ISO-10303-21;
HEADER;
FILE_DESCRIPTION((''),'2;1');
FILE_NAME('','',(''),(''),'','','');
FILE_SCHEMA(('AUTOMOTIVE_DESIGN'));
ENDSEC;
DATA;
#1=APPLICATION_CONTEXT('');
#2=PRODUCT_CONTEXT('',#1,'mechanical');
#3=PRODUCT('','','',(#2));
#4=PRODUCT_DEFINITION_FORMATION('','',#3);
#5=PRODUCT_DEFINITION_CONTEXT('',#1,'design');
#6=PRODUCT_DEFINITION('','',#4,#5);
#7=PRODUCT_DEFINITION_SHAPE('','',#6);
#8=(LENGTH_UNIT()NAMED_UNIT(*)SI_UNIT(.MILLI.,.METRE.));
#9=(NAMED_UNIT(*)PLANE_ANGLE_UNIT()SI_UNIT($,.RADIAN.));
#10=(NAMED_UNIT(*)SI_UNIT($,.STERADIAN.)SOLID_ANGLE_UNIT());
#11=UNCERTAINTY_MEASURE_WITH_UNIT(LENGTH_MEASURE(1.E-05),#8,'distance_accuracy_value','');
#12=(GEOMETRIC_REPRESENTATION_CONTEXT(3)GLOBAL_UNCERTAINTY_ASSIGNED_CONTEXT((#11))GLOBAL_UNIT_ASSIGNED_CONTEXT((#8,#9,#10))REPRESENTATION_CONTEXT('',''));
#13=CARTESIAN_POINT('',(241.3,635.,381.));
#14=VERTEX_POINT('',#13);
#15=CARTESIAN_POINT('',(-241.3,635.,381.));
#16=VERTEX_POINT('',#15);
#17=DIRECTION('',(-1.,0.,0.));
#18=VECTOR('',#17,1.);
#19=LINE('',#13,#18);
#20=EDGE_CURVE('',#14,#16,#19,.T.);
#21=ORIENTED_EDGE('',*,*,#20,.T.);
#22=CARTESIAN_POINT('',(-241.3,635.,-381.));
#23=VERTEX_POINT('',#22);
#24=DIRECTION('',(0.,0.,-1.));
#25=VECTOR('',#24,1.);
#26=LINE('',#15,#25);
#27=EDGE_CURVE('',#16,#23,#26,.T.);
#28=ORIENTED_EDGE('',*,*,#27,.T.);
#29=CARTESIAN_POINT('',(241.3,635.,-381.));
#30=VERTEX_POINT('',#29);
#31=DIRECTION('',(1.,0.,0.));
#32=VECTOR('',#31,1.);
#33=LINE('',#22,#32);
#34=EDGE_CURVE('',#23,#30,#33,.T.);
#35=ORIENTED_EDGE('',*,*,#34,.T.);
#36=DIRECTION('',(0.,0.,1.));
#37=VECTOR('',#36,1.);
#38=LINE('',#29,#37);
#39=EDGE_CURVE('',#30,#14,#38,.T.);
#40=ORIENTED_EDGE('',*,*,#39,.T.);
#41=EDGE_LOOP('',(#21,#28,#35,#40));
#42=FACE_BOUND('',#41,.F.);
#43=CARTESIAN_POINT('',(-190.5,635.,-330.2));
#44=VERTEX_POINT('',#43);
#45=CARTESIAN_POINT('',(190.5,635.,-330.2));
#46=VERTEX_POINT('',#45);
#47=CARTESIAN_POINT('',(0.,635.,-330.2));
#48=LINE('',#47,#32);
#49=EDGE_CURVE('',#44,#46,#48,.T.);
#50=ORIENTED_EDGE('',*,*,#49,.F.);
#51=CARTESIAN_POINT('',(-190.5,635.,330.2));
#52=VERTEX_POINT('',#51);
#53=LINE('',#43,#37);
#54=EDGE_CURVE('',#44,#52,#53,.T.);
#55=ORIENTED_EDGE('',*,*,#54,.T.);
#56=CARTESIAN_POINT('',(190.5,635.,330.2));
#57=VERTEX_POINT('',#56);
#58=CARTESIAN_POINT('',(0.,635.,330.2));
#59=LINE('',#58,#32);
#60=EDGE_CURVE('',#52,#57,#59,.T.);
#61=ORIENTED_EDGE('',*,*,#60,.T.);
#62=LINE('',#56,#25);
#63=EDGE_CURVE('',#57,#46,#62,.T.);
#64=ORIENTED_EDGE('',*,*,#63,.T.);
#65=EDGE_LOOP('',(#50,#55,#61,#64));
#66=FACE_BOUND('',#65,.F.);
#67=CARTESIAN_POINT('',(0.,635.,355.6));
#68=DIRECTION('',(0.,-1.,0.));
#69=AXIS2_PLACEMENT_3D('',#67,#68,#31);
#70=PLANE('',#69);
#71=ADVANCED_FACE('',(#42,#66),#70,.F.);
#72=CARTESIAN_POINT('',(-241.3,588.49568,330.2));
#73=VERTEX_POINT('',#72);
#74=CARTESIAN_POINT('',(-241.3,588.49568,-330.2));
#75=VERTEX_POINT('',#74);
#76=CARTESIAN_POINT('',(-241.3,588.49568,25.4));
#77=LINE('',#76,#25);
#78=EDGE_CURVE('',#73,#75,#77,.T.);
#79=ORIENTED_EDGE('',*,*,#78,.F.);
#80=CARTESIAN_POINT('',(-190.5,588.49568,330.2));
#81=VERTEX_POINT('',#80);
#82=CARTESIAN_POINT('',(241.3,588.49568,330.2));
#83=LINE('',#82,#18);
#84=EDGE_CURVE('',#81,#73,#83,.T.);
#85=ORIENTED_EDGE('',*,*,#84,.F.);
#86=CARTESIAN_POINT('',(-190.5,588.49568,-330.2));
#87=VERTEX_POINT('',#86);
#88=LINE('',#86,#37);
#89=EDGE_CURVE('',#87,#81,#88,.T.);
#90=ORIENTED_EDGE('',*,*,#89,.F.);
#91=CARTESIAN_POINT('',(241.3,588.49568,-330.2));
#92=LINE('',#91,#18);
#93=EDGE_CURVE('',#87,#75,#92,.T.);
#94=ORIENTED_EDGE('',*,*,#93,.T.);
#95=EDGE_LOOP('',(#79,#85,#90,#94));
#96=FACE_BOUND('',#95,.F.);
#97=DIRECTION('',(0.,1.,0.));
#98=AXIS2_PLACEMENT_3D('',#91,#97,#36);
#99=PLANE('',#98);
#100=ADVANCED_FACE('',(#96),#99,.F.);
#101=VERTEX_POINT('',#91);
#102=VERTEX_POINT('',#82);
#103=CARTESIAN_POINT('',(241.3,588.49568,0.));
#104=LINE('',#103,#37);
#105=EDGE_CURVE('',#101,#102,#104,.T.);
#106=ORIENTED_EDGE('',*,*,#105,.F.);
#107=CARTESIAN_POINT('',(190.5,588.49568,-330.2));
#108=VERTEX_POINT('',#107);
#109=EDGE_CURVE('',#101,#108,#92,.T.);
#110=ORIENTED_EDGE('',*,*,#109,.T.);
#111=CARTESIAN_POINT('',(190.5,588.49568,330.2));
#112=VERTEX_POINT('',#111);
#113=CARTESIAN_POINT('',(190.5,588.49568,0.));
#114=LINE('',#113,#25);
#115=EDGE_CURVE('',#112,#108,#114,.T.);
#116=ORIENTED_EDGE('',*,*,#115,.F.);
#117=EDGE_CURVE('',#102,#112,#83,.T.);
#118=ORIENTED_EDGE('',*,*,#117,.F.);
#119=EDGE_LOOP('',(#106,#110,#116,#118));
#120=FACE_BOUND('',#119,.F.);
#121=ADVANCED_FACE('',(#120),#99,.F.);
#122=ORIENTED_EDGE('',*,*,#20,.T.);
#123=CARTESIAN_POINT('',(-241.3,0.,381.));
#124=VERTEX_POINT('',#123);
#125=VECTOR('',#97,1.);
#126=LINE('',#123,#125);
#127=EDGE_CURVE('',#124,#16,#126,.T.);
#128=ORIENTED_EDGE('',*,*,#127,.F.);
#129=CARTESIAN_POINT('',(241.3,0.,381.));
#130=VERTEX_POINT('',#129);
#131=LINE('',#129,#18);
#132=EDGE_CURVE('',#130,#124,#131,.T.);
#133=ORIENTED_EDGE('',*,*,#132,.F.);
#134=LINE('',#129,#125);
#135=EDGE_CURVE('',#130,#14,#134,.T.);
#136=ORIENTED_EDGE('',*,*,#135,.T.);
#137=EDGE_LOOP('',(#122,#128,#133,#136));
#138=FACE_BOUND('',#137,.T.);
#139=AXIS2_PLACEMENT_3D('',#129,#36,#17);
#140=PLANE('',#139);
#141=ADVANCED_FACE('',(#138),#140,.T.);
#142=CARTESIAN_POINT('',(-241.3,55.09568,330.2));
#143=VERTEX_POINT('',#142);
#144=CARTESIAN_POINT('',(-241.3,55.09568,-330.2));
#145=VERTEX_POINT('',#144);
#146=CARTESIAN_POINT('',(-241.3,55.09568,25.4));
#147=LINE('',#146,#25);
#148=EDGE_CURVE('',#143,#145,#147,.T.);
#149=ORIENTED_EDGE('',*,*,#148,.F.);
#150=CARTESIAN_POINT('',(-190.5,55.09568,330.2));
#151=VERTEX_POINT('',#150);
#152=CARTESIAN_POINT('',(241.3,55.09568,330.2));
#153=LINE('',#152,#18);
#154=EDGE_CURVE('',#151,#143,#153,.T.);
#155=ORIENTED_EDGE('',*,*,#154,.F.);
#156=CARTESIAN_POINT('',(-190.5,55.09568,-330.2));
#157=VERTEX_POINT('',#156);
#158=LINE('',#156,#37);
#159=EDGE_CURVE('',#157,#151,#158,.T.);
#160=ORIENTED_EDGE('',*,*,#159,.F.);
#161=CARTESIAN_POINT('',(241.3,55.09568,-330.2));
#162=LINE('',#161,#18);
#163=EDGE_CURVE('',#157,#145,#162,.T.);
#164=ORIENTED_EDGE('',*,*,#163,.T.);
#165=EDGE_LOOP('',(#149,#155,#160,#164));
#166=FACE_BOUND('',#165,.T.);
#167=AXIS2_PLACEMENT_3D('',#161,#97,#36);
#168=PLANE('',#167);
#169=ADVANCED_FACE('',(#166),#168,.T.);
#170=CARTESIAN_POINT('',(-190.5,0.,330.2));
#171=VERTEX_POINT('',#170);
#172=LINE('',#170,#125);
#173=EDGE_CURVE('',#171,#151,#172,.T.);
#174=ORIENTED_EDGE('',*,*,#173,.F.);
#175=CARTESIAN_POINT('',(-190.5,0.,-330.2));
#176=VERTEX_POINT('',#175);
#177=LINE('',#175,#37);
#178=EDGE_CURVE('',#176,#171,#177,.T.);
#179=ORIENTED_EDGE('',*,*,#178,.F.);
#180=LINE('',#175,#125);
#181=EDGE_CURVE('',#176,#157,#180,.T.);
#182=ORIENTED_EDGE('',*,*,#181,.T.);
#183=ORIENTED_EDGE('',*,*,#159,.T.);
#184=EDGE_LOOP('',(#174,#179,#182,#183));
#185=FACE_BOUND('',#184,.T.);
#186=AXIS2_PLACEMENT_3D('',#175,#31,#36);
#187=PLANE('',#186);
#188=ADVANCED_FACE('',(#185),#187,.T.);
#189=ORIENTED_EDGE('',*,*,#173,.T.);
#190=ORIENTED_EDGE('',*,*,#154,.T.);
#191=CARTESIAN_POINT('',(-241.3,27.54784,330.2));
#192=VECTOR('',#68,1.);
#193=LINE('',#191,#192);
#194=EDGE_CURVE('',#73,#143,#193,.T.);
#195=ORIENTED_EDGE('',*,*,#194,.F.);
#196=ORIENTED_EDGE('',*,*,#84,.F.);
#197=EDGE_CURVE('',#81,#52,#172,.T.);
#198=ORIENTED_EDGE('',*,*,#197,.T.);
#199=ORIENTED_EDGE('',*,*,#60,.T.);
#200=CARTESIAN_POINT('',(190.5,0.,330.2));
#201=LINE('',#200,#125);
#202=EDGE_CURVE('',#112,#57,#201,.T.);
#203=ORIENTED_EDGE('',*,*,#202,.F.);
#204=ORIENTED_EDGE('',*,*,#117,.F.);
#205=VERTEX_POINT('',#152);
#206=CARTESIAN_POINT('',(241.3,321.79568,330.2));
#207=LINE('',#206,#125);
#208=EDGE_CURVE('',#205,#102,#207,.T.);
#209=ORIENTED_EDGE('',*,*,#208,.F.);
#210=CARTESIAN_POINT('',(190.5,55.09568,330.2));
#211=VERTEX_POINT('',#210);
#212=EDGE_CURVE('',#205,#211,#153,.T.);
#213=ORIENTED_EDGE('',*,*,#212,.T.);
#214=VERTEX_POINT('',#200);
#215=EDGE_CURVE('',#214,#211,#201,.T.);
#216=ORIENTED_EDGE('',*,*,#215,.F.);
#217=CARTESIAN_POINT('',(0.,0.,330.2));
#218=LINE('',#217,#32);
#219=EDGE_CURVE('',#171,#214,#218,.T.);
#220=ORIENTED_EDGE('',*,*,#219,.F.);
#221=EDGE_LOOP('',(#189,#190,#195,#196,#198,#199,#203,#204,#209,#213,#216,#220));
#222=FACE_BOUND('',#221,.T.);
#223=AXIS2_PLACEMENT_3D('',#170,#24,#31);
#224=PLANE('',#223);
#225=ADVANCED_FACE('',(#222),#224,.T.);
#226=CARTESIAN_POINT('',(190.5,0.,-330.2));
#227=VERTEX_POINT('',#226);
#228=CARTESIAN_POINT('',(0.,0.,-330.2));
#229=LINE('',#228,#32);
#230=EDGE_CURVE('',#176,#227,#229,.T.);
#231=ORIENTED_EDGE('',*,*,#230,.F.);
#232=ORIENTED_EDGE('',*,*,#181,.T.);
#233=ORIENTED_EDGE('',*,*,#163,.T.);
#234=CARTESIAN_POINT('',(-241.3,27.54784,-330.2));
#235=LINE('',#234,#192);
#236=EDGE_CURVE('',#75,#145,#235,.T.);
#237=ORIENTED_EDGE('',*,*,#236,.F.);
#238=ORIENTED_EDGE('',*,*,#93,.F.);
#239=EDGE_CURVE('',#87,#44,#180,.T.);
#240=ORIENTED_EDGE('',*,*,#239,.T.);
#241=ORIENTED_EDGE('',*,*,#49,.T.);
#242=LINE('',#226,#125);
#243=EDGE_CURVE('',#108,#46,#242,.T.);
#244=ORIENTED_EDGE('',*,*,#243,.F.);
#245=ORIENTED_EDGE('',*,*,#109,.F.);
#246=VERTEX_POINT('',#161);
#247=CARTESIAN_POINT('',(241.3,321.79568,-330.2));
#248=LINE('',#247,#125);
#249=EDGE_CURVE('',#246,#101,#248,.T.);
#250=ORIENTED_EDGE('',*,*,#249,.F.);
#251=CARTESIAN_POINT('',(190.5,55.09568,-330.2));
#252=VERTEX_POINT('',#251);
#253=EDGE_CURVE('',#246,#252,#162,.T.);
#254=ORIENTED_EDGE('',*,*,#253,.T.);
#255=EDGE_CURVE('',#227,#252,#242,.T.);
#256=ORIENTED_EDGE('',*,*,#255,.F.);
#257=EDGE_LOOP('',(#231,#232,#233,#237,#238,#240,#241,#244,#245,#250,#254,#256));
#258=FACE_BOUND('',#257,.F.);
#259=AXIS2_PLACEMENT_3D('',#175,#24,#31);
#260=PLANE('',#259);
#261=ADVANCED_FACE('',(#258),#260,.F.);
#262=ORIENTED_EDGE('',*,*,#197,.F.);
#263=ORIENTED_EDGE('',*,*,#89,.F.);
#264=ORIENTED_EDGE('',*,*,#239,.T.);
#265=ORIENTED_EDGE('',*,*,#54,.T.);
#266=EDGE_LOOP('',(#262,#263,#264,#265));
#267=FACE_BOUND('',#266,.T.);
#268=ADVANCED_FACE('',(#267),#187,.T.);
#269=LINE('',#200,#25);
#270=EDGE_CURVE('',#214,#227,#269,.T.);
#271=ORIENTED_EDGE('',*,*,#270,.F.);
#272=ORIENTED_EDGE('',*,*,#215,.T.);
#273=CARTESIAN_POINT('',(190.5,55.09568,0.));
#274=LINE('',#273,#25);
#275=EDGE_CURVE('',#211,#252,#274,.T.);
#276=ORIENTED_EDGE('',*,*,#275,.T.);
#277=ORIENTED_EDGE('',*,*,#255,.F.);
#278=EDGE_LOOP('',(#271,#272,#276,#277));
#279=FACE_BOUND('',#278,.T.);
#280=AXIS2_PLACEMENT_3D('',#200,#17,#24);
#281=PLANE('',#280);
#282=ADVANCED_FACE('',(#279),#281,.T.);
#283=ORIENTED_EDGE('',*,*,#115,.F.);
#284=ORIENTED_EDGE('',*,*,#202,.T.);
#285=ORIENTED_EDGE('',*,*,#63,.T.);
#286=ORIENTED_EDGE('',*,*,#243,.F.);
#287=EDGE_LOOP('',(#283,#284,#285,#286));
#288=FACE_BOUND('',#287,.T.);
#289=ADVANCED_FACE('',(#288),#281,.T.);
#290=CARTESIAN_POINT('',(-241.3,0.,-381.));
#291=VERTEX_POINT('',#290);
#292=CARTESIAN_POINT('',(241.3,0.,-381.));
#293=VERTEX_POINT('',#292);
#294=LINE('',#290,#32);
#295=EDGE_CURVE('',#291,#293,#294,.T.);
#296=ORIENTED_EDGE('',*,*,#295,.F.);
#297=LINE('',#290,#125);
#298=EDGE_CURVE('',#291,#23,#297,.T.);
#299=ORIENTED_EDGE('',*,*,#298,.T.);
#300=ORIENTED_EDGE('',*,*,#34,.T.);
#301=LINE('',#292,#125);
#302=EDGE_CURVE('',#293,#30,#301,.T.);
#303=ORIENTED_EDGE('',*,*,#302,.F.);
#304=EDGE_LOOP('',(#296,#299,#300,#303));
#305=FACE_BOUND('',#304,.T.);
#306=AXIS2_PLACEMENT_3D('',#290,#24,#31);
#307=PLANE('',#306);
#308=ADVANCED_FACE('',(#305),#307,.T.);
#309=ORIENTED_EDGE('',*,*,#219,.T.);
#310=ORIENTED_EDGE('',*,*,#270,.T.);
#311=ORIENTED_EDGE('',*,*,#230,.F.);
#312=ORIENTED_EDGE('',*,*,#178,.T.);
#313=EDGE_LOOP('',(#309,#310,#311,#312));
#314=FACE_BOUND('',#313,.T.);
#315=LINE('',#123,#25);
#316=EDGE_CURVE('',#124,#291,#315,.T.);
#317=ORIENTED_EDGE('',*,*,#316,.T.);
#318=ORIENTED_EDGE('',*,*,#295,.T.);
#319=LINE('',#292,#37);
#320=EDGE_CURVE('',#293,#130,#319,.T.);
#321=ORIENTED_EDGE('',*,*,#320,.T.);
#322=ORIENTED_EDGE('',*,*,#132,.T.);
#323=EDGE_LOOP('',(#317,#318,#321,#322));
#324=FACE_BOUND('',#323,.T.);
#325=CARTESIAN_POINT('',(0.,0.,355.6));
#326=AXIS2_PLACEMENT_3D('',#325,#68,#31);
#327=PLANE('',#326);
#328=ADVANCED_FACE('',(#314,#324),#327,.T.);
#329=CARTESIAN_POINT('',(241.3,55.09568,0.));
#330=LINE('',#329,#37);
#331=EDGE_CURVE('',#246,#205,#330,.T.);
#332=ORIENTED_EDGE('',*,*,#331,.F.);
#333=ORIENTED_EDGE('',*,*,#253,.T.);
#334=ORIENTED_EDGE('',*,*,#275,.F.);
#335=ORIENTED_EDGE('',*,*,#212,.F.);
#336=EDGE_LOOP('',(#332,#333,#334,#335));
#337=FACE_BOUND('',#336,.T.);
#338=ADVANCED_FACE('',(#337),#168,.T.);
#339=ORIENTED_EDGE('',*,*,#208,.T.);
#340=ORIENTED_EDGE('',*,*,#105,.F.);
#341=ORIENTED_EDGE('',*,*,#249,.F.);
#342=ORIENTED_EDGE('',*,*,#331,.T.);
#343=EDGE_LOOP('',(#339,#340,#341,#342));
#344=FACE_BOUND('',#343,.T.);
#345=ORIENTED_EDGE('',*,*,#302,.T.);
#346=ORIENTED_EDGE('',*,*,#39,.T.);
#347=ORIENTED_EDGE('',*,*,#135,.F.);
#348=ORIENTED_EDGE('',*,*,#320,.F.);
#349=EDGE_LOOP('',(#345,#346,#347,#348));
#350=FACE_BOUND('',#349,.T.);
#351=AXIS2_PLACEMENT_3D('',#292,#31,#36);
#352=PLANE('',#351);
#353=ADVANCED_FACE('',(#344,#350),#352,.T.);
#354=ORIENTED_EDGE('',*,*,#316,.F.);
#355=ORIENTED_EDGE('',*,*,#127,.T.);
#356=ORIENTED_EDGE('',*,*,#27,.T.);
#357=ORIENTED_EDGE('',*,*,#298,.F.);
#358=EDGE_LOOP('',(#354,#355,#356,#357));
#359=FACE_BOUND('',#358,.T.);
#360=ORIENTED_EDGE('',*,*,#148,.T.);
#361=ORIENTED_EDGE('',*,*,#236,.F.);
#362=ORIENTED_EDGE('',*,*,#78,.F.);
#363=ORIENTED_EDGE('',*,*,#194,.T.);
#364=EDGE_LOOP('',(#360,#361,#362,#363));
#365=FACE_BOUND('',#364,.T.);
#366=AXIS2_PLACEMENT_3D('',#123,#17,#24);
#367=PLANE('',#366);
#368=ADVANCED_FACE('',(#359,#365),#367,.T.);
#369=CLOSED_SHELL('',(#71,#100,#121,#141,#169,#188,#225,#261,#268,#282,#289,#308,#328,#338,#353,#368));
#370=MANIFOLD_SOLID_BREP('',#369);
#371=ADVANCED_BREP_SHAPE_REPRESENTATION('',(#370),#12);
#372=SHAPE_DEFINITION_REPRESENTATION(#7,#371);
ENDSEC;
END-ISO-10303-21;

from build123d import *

# Parameters (mm, degrees)
F0_W     = 381
F0_H     = 50.8
F1_DEPTH = 635
F2_W     = 533.4
F2_H     = 660.4
F3_DEPTH = 482.601
F0_H_2   = 660.4
F4_DEPTH = 635.001


# Not quite as in the source:
# - a feature names something its author has since deleted; it is built from what else it names


with BuildPart() as f1:
    # F0 (on Front) → F1 (new body)
    with BuildSketch(Plane.XZ):
        with Locations((0, 355.6)):
            Rectangle(F0_W, F0_H)
        Polygon((241.3, 381), (190.5, 381), (190.5, 330.2), (190.5, -330.2), (190.5, -381), (241.3, -381), align=None)
        with Locations((0, -355.6)):
            Rectangle(F0_W, F0_H)
        Polygon((-190.5, 381), (-241.3, 381), (-241.3, -381), (-190.5, -381), (-190.5, -330.2), (-190.5, 330.2), align=None)
    extrude(amount=-F1_DEPTH)

    # F2 (on face) → F3 (cut, through all)
    with BuildSketch(Plane.YZ.offset(241.3)):
        with Locations((321.7956796288, 0)):
            Rectangle(F2_W, F2_H)
    extrude(amount=-F3_DEPTH, mode=Mode.SUBTRACT)

    # F0 (on Front) → F4 (cut, through all)
    with BuildSketch(Plane.XZ):
        Rectangle(F0_W, F0_H_2)
    extrude(amount=-F4_DEPTH, mode=Mode.SUBTRACT)


solid = f1.part
